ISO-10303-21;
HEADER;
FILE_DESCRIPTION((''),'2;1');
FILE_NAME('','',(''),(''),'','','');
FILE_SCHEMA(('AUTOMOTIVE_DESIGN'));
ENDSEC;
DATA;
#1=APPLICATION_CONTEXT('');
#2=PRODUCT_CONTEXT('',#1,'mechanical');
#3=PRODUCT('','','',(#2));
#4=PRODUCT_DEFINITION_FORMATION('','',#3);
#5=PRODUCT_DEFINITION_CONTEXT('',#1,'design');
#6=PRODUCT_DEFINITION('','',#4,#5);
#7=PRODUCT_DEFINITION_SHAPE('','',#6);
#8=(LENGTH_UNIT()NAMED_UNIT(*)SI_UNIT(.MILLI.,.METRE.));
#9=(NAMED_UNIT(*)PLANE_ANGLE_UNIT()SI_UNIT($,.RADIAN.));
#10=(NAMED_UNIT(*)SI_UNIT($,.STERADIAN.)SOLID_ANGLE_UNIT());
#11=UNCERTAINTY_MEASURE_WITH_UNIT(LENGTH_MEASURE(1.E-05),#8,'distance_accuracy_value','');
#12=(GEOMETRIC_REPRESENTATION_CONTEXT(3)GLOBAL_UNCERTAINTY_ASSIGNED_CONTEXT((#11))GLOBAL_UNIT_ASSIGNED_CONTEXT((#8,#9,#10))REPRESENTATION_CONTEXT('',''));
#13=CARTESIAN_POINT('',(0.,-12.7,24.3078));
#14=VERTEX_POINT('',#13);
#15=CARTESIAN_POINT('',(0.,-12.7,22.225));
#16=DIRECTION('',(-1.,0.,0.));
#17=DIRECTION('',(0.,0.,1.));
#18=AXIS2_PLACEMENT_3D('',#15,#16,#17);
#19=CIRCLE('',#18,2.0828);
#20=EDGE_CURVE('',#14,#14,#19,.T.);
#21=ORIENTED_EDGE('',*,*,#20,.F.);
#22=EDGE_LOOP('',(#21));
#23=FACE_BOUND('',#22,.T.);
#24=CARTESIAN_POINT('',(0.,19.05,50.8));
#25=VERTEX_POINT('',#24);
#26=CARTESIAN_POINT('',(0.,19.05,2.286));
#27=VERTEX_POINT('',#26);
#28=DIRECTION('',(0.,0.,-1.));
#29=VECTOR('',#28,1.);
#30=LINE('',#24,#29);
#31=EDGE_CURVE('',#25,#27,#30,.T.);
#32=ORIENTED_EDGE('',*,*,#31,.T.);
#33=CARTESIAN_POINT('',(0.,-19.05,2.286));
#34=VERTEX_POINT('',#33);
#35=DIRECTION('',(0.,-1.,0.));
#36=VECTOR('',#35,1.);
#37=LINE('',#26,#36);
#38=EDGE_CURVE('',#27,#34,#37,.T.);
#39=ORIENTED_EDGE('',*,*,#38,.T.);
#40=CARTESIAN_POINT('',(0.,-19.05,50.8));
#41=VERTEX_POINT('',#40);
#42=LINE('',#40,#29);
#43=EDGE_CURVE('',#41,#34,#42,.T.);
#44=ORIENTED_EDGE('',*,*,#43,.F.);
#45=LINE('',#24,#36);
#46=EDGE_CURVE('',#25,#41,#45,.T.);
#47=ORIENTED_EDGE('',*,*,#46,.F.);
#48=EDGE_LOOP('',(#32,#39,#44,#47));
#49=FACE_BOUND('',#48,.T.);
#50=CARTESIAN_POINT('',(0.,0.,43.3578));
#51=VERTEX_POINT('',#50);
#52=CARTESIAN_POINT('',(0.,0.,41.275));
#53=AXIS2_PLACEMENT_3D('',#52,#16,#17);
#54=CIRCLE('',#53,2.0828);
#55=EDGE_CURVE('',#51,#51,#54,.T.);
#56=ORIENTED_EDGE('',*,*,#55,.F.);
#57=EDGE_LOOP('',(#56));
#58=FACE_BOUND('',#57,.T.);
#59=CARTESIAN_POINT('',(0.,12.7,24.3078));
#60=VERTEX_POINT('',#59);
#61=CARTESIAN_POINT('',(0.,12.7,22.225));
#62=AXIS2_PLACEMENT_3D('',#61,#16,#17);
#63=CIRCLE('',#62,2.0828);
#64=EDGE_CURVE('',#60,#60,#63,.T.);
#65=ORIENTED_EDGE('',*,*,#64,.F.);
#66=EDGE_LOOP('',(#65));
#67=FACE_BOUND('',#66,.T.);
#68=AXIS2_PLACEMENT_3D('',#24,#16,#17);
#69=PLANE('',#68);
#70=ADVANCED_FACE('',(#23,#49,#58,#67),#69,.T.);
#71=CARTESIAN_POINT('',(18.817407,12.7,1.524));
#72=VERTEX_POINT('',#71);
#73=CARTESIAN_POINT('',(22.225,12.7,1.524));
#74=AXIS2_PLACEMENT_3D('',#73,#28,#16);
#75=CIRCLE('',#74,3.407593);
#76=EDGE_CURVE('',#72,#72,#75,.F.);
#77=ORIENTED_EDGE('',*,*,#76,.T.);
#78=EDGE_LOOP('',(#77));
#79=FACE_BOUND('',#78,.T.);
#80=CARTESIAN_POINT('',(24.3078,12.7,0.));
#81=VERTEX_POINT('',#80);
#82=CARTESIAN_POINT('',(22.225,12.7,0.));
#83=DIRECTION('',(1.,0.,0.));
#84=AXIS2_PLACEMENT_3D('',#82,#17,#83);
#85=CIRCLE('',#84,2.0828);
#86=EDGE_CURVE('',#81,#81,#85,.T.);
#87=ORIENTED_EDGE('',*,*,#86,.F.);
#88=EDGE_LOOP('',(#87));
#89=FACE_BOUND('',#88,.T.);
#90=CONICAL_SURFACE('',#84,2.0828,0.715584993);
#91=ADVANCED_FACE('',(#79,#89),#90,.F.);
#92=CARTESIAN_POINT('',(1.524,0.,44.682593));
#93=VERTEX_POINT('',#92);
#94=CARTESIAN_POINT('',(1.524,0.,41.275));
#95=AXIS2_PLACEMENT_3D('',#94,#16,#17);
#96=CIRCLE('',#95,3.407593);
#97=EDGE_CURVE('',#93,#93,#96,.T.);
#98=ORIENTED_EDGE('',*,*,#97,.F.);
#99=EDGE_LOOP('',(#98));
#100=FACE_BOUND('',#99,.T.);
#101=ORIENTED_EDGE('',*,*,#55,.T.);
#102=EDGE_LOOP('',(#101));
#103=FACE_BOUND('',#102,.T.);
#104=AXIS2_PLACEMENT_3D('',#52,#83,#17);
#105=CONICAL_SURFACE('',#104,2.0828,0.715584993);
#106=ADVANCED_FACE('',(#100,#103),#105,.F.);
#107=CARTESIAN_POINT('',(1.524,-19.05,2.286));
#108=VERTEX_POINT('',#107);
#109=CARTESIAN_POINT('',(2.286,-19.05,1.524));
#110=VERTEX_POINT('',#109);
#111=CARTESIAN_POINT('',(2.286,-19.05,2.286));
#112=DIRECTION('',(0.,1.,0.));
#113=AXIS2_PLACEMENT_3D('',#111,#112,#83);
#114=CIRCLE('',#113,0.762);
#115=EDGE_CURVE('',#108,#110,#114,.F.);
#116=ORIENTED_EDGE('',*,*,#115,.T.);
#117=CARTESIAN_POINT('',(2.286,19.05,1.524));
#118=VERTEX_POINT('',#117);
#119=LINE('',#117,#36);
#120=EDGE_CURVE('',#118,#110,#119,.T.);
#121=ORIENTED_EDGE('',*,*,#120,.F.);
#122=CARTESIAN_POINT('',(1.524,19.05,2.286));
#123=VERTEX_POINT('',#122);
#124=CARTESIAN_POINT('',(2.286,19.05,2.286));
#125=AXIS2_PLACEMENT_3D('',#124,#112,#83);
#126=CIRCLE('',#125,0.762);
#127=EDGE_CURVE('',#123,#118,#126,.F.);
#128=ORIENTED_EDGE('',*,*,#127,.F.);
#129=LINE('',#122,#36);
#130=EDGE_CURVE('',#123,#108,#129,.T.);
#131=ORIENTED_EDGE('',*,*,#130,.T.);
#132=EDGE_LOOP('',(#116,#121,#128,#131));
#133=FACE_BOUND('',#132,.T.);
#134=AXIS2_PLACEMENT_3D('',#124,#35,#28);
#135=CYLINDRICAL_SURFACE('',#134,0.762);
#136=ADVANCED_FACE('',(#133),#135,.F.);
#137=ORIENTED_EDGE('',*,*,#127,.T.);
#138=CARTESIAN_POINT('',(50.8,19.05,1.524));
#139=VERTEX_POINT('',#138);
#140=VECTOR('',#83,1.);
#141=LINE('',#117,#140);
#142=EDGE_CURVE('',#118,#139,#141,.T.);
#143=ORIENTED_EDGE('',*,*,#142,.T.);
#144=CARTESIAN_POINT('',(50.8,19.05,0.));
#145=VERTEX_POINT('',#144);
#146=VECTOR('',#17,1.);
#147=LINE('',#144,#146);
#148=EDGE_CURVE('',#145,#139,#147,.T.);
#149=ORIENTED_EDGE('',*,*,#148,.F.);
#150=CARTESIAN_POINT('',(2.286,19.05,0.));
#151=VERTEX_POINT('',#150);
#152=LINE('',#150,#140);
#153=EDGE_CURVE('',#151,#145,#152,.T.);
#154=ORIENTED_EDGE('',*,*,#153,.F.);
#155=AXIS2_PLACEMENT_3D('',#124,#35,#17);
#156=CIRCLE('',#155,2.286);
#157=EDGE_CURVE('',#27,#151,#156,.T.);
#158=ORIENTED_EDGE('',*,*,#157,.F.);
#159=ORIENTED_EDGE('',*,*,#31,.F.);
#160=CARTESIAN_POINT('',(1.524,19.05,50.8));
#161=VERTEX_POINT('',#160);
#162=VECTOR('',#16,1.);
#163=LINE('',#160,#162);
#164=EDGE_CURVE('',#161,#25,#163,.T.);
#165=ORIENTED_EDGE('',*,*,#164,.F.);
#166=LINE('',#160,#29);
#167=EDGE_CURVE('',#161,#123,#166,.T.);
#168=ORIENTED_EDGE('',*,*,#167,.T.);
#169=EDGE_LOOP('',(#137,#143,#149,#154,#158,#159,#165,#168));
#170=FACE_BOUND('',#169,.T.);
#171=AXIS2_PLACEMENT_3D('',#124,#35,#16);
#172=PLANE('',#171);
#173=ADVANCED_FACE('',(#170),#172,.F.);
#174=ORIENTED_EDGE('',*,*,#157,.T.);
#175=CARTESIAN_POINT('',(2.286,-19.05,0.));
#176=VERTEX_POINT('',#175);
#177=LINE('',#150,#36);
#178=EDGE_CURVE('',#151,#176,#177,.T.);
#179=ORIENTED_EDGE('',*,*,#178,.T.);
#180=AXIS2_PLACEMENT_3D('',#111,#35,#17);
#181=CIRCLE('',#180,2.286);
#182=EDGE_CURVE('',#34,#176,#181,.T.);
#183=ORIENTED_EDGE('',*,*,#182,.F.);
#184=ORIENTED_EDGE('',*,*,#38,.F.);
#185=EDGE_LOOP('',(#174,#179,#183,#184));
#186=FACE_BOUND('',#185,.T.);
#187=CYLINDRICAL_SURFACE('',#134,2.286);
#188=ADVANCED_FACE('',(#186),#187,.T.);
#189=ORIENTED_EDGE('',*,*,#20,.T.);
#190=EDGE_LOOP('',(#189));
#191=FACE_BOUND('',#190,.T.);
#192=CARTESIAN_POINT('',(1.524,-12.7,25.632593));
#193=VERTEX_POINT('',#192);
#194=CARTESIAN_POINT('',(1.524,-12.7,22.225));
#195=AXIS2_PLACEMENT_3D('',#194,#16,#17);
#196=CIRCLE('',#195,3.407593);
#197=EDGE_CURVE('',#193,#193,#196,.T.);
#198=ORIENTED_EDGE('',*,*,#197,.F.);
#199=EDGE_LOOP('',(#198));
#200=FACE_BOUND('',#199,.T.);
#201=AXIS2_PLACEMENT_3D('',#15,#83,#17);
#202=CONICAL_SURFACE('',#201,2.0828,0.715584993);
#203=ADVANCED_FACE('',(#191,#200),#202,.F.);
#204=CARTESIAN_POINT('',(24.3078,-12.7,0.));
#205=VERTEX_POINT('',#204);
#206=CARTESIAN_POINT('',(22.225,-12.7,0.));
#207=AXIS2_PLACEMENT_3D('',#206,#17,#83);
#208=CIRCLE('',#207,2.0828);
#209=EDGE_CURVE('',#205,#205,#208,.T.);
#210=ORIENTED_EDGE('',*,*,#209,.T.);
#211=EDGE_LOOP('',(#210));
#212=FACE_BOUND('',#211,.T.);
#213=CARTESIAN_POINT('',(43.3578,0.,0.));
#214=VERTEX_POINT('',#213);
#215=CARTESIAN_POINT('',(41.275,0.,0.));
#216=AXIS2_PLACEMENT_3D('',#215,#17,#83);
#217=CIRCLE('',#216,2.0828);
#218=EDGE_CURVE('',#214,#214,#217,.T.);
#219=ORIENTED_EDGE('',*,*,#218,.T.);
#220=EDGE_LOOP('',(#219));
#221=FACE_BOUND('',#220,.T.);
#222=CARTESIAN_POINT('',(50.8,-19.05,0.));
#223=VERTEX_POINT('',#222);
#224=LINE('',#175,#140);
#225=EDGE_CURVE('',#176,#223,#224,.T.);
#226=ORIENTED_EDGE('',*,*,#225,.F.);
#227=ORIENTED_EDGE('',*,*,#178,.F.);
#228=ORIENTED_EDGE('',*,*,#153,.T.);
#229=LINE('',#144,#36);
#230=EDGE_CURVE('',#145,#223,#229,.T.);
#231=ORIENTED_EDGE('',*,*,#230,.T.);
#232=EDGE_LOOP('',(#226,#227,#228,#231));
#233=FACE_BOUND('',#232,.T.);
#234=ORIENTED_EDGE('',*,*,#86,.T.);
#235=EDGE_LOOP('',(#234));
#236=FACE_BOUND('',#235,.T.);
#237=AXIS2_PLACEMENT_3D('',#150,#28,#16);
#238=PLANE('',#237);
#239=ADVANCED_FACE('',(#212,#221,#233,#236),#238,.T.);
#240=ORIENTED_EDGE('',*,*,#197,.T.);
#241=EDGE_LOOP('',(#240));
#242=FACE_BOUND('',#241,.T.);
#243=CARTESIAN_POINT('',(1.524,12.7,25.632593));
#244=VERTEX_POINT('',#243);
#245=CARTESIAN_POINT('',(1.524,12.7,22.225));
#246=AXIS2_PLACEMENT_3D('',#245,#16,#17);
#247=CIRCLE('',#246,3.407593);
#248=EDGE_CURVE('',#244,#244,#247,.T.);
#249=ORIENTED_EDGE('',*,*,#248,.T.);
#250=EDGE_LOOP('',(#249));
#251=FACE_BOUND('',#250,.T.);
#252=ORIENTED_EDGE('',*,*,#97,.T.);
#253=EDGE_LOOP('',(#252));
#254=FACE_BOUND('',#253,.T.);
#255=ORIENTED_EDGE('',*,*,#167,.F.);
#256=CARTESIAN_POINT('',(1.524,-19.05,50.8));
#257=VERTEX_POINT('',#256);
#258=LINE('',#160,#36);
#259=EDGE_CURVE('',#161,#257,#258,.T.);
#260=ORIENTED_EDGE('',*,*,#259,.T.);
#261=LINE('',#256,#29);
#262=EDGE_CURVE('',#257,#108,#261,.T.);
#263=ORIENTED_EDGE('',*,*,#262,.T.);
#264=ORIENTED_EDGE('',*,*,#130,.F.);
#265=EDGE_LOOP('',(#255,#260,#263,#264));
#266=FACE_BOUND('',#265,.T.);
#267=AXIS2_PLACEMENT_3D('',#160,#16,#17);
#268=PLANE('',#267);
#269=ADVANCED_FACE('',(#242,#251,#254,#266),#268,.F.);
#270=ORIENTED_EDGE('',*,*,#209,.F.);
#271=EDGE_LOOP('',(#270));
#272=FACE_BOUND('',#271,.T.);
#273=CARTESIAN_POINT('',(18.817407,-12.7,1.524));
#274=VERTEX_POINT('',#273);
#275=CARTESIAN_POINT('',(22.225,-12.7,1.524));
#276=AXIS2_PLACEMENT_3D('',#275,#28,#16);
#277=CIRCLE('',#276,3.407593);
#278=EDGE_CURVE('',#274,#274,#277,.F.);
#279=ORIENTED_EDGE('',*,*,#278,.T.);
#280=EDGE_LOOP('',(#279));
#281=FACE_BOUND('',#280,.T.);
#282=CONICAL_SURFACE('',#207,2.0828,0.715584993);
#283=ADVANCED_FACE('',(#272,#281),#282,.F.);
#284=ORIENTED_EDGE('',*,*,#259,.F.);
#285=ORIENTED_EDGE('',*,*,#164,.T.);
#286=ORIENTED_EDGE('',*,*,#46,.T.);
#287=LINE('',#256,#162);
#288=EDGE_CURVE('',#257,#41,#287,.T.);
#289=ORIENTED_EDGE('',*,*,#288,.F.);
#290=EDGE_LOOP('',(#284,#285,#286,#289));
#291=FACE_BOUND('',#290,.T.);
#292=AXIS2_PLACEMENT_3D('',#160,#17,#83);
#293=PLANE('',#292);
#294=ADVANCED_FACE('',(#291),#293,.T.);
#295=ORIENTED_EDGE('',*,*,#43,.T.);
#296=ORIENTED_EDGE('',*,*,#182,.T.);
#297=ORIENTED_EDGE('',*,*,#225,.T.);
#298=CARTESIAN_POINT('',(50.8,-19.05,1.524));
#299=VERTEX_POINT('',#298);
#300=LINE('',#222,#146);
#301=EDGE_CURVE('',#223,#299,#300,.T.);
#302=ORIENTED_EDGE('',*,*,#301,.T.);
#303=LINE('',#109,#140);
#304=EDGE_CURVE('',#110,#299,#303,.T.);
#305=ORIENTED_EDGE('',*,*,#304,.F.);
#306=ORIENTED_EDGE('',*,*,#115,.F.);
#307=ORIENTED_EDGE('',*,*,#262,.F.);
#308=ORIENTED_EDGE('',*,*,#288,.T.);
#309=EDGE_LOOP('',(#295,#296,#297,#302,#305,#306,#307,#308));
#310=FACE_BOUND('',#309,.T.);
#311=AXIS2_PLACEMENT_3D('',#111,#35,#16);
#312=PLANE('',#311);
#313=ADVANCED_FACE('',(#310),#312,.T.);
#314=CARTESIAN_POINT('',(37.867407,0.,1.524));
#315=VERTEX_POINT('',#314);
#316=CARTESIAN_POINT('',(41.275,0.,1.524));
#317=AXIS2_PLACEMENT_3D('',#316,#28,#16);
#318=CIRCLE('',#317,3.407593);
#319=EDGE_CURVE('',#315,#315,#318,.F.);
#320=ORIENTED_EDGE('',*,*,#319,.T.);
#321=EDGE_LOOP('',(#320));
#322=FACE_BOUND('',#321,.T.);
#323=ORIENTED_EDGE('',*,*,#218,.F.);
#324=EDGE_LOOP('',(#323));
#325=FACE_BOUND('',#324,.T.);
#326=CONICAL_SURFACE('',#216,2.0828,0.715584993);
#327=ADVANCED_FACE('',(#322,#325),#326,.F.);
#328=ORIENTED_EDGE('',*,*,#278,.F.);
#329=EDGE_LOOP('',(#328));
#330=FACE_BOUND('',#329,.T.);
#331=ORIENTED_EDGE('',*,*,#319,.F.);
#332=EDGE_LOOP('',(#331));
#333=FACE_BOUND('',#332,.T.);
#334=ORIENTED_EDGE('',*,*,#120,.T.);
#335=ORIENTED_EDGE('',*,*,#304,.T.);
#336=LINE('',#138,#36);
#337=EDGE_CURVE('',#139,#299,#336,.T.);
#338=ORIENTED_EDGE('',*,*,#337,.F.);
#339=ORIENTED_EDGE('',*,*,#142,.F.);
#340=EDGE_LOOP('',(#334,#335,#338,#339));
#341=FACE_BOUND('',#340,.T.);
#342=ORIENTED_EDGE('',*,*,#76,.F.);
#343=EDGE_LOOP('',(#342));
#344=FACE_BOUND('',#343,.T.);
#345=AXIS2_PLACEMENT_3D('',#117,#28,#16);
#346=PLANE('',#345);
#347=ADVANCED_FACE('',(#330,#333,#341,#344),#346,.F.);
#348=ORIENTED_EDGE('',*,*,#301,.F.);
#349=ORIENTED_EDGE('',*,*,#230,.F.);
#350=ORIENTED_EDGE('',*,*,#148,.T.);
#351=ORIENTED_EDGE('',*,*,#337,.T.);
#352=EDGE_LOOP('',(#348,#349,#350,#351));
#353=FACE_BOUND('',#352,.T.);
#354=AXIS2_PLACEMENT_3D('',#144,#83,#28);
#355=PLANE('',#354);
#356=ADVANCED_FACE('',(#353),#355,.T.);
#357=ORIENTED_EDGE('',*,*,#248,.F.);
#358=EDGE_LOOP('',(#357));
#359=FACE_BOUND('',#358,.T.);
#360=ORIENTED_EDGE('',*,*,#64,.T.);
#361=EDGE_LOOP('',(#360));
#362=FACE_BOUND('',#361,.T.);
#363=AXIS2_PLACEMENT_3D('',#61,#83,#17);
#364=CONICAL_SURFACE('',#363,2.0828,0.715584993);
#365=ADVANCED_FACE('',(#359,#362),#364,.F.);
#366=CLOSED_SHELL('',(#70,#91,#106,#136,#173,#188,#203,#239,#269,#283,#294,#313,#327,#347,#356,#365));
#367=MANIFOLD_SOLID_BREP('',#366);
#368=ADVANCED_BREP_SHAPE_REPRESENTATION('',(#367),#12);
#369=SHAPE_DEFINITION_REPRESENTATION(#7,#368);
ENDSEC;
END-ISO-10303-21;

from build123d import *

# Parameters (mm, degrees)
EXTRUDE_THIN1_START          = -19.05
EXTRUDE_THIN1_DEPTH          = 38.1
SKETCH4_R                    = 2.0828
EXTRUDE3_DEPTH               = 74.291654886
SKETCH5_R                    = 2.0828
CUT_EXTRUDE1_DEPTH           = 2.54
CUT_EXTRUDE1_DRAFT           = 41
CUT_EXTRUDE1_PROFILE_2_DEPTH = 2.54
CUT_EXTRUDE1_PROFILE_2_DRAFT = 41
CUT_EXTRUDE1_PROFILE_3_DEPTH = 2.54
CUT_EXTRUDE1_PROFILE_3_DRAFT = 41
MIRROR1_COPY_1_SKETCH_R      = 2.0828
MIRROR1_COPY_1_DEPTH         = 2.54
MIRROR1_COPY_1_DRAFT         = 41
MIRROR1_COPY_2_SKETCH_R      = 2.0828
MIRROR1_COPY_2_DEPTH         = 2.54
MIRROR1_COPY_2_DRAFT         = 41
MIRROR1_COPY_3_SKETCH_R      = 2.0828
MIRROR1_COPY_3_DEPTH         = 2.54
MIRROR1_COPY_3_DRAFT         = 41
MIRROR1_COPY_4_SKETCH_R      = 2.0828
MIRROR1_COPY_4_DEPTH         = 2.54
MIRROR1_COPY_4_DRAFT         = 41
MIRROR1_COPY_5_SKETCH_R      = 2.0828
MIRROR1_COPY_5_DEPTH         = 2.54
MIRROR1_COPY_5_DRAFT         = 41


# Read off the part's stored shape, not the designer's step: Extrude-Thin1
with BuildPart() as part:
    # Extrude-Thin1 outline → Extrude-Thin1 (new body)
    with BuildSketch(Plane(origin=(0, 0, 0), x_dir=(1, 0, 0), z_dir=(0, 1, 0)).offset(EXTRUDE_THIN1_START)):
        with BuildLine():
            Line((2.286, -1.524), (50.8, -1.524))
            Line((50.8, -1.524), (50.8, 0))
            Line((50.8, 0), (2.286, 0))
            ThreePointArc((2.286, 0), (0.669553898, -0.669553898), (0, -2.286))
            Line((0, -2.286), (0, -50.8))
            Line((0, -50.8), (1.524, -50.8))
            Line((1.524, -50.8), (1.524, -2.286))
            ThreePointArc((1.524, -2.286), (1.747184633, -1.747184633), (2.286, -1.524))
        make_face()
    extrude(amount=EXTRUDE_THIN1_DEPTH)

    # Sketch4 → Extrude3 (cut, through all)
    with BuildSketch(Plane(origin=(1.524, 0, 0), x_dir=(0, 0, -1), z_dir=(1, 0, 0))):
        with Locations((-41.275, 0)):
            Circle(SKETCH4_R)
        with Locations((-22.225, 12.7)):
            Circle(SKETCH4_R)
        with Locations((-22.225, -12.7)):
            Circle(SKETCH4_R)
    extrude3 = extrude(amount=-EXTRUDE3_DEPTH, mode=Mode.SUBTRACT)


with BuildPart() as cut_extrude1_tool:
    # Sketch5 → Cut-Extrude1 (with draft: the straight prism first)
    with BuildSketch(Plane.ZY):
        with Locations((22.225, -12.7)):
            Circle(SKETCH5_R)
    extrude(amount=-CUT_EXTRUDE1_DEPTH)
    # Cut-Extrude1: the draft: its side faces are tilted about the plane it starts from
    cut_extrude1_sides = [cut_extrude1_tool.faces().sort_by_distance(p)[0] for p in [
        (1.27, -12.7, 20.1422),
    ]]
    draft(cut_extrude1_sides, Plane.ZY, CUT_EXTRUDE1_DRAFT)


with BuildPart() as part_1:
    add(part.part)

    # Cut-Extrude1: cut by cut_extrude1_tool
    add(cut_extrude1_tool.part, mode=Mode.SUBTRACT)


with BuildPart() as cut_extrude1_profile_2_tool:
    # Sketch5 → Cut-Extrude1 profile 2 (with draft: the straight prism first)
    with BuildSketch(Plane.ZY):
        with Locations((22.225, 12.7)):
            Circle(SKETCH5_R)
    extrude(amount=-CUT_EXTRUDE1_PROFILE_2_DEPTH)
    # Cut-Extrude1 profile 2: the draft: its side faces are tilted about the plane it starts from
    cut_extrude1_profile_2_sides = [cut_extrude1_profile_2_tool.faces().sort_by_distance(p)[0] for p in [
        (1.27, 12.7, 20.1422),
    ]]
    draft(cut_extrude1_profile_2_sides, Plane.ZY, CUT_EXTRUDE1_PROFILE_2_DRAFT)


with BuildPart() as part_2:
    add(part_1.part)

    # Cut-Extrude1 profile 2: cut by cut_extrude1_profile_2_tool
    add(cut_extrude1_profile_2_tool.part, mode=Mode.SUBTRACT)


with BuildPart() as cut_extrude1_profile_3_tool:
    # Sketch5 → Cut-Extrude1 profile 3 (with draft: the straight prism first)
    with BuildSketch(Plane.ZY):
        with Locations((41.275, 0)):
            Circle(SKETCH5_R)
    extrude(amount=-CUT_EXTRUDE1_PROFILE_3_DEPTH)
    # Cut-Extrude1 profile 3: the draft: its side faces are tilted about the plane it starts from
    cut_extrude1_profile_3_sides = [cut_extrude1_profile_3_tool.faces().sort_by_distance(p)[0] for p in [
        (1.27, 0, 39.1922),
    ]]
    draft(cut_extrude1_profile_3_sides, Plane.ZY, CUT_EXTRUDE1_PROFILE_3_DRAFT)


with BuildPart() as part_3:
    add(part_2.part)

    # Cut-Extrude1 profile 3: cut by cut_extrude1_profile_3_tool
    add(cut_extrude1_profile_3_tool.part, mode=Mode.SUBTRACT)

    # Mirror1: Extrude3 across plane
    add(extrude3.mirror(Plane(origin=(0, 0, 0), x_dir=(0.7071067811865465, 0, 0.7071067811865486), z_dir=(-0.7071067811865488, 0, 0.7071067811865464))), mode=Mode.SUBTRACT)


with BuildPart() as mirror1_copy_1_tool:
    # Mirror1 copy 1 sketch → Mirror1 copy 1 (with draft: the straight prism first)
    with BuildSketch(Plane(origin=(0, 0, 0), x_dir=(1, 0, 0), z_dir=(0, 0, -1))):
        with Locations((22.225, 12.7)):
            Circle(MIRROR1_COPY_1_SKETCH_R)
    extrude(amount=-MIRROR1_COPY_1_DEPTH)
    # Mirror1 copy 1: the draft: its side faces are tilted about the plane it starts from
    mirror1_copy_1_sides = [mirror1_copy_1_tool.faces().sort_by_distance(p)[0] for p in [
        (20.1422, -12.7, 1.27),
    ]]
    draft(mirror1_copy_1_sides, Plane(origin=(0, 0, 0), x_dir=(1, 0, 0), z_dir=(0, 0, -1)), MIRROR1_COPY_1_DRAFT)


with BuildPart() as part_4:
    add(part_3.part)

    # Mirror1 copy 1: cut by mirror1_copy_1_tool
    add(mirror1_copy_1_tool.part, mode=Mode.SUBTRACT)


with BuildPart() as mirror1_copy_2_tool:
    # Mirror1 copy 2 sketch → Mirror1 copy 2 (with draft: the straight prism first)
    with BuildSketch(Plane(origin=(0, 0, 0), x_dir=(1, 0, 0), z_dir=(0, 0, -1))):
        with Locations((22.225, -12.7)):
            Circle(MIRROR1_COPY_2_SKETCH_R)
    extrude(amount=-MIRROR1_COPY_2_DEPTH)
    # Mirror1 copy 2: the draft: its side faces are tilted about the plane it starts from
    mirror1_copy_2_sides = [mirror1_copy_2_tool.faces().sort_by_distance(p)[0] for p in [
        (20.1422, 12.7, 1.27),
    ]]
    draft(mirror1_copy_2_sides, Plane(origin=(0, 0, 0), x_dir=(1, 0, 0), z_dir=(0, 0, -1)), MIRROR1_COPY_2_DRAFT)


with BuildPart() as part_5:
    add(part_4.part)

    # Mirror1 copy 2: cut by mirror1_copy_2_tool
    add(mirror1_copy_2_tool.part, mode=Mode.SUBTRACT)


with BuildPart() as mirror1_copy_3_tool:
    # Mirror1 copy 3 sketch → Mirror1 copy 3 (with draft: the straight prism first)
    with BuildSketch(Plane(origin=(0, 0, 0), x_dir=(1, 0, 0), z_dir=(0, 0, -1))):
        with Locations((41.275, 0)):
            Circle(MIRROR1_COPY_3_SKETCH_R)
    extrude(amount=-MIRROR1_COPY_3_DEPTH)
    # Mirror1 copy 3: the draft: its side faces are tilted about the plane it starts from
    mirror1_copy_3_sides = [mirror1_copy_3_tool.faces().sort_by_distance(p)[0] for p in [
        (39.1922, 0, 1.27),
    ]]
    draft(mirror1_copy_3_sides, Plane(origin=(0, 0, 0), x_dir=(1, 0, 0), z_dir=(0, 0, -1)), MIRROR1_COPY_3_DRAFT)


with BuildPart() as part_6:
    add(part_5.part)

    # Mirror1 copy 3: cut by mirror1_copy_3_tool
    add(mirror1_copy_3_tool.part, mode=Mode.SUBTRACT)


with BuildPart() as mirror1_copy_4_tool:
    # Mirror1 copy 4 sketch → Mirror1 copy 4 (with draft: the straight prism first)
    with BuildSketch(Plane(origin=(0, 0, 0), x_dir=(1, 0, 0), z_dir=(0, 0, -1))):
        with Locations((22.225, -12.7)):
            Circle(MIRROR1_COPY_4_SKETCH_R)
    extrude(amount=-MIRROR1_COPY_4_DEPTH)
    # Mirror1 copy 4: the draft: its side faces are tilted about the plane it starts from
    mirror1_copy_4_sides = [mirror1_copy_4_tool.faces().sort_by_distance(p)[0] for p in [
        (20.1422, 12.7, 1.27),
    ]]
    draft(mirror1_copy_4_sides, Plane(origin=(0, 0, 0), x_dir=(1, 0, 0), z_dir=(0, 0, -1)), MIRROR1_COPY_4_DRAFT)


with BuildPart() as part_7:
    add(part_6.part)

    # Mirror1 copy 4: cut by mirror1_copy_4_tool
    add(mirror1_copy_4_tool.part, mode=Mode.SUBTRACT)


with BuildPart() as mirror1_copy_5_tool:
    # Mirror1 copy 5 sketch → Mirror1 copy 5 (with draft: the straight prism first)
    with BuildSketch(Plane(origin=(0, 0, 0), x_dir=(1, 0, 0), z_dir=(0, 0, -1))):
        with Locations((41.275, 0)):
            Circle(MIRROR1_COPY_5_SKETCH_R)
    extrude(amount=-MIRROR1_COPY_5_DEPTH)
    # Mirror1 copy 5: the draft: its side faces are tilted about the plane it starts from
    mirror1_copy_5_sides = [mirror1_copy_5_tool.faces().sort_by_distance(p)[0] for p in [
        (39.1922, 0, 1.27),
    ]]
    draft(mirror1_copy_5_sides, Plane(origin=(0, 0, 0), x_dir=(1, 0, 0), z_dir=(0, 0, -1)), MIRROR1_COPY_5_DRAFT)


with BuildPart() as part_8:
    add(part_7.part)

    # Mirror1 copy 5: cut by mirror1_copy_5_tool
    add(mirror1_copy_5_tool.part, mode=Mode.SUBTRACT)


solid = part_8.part
